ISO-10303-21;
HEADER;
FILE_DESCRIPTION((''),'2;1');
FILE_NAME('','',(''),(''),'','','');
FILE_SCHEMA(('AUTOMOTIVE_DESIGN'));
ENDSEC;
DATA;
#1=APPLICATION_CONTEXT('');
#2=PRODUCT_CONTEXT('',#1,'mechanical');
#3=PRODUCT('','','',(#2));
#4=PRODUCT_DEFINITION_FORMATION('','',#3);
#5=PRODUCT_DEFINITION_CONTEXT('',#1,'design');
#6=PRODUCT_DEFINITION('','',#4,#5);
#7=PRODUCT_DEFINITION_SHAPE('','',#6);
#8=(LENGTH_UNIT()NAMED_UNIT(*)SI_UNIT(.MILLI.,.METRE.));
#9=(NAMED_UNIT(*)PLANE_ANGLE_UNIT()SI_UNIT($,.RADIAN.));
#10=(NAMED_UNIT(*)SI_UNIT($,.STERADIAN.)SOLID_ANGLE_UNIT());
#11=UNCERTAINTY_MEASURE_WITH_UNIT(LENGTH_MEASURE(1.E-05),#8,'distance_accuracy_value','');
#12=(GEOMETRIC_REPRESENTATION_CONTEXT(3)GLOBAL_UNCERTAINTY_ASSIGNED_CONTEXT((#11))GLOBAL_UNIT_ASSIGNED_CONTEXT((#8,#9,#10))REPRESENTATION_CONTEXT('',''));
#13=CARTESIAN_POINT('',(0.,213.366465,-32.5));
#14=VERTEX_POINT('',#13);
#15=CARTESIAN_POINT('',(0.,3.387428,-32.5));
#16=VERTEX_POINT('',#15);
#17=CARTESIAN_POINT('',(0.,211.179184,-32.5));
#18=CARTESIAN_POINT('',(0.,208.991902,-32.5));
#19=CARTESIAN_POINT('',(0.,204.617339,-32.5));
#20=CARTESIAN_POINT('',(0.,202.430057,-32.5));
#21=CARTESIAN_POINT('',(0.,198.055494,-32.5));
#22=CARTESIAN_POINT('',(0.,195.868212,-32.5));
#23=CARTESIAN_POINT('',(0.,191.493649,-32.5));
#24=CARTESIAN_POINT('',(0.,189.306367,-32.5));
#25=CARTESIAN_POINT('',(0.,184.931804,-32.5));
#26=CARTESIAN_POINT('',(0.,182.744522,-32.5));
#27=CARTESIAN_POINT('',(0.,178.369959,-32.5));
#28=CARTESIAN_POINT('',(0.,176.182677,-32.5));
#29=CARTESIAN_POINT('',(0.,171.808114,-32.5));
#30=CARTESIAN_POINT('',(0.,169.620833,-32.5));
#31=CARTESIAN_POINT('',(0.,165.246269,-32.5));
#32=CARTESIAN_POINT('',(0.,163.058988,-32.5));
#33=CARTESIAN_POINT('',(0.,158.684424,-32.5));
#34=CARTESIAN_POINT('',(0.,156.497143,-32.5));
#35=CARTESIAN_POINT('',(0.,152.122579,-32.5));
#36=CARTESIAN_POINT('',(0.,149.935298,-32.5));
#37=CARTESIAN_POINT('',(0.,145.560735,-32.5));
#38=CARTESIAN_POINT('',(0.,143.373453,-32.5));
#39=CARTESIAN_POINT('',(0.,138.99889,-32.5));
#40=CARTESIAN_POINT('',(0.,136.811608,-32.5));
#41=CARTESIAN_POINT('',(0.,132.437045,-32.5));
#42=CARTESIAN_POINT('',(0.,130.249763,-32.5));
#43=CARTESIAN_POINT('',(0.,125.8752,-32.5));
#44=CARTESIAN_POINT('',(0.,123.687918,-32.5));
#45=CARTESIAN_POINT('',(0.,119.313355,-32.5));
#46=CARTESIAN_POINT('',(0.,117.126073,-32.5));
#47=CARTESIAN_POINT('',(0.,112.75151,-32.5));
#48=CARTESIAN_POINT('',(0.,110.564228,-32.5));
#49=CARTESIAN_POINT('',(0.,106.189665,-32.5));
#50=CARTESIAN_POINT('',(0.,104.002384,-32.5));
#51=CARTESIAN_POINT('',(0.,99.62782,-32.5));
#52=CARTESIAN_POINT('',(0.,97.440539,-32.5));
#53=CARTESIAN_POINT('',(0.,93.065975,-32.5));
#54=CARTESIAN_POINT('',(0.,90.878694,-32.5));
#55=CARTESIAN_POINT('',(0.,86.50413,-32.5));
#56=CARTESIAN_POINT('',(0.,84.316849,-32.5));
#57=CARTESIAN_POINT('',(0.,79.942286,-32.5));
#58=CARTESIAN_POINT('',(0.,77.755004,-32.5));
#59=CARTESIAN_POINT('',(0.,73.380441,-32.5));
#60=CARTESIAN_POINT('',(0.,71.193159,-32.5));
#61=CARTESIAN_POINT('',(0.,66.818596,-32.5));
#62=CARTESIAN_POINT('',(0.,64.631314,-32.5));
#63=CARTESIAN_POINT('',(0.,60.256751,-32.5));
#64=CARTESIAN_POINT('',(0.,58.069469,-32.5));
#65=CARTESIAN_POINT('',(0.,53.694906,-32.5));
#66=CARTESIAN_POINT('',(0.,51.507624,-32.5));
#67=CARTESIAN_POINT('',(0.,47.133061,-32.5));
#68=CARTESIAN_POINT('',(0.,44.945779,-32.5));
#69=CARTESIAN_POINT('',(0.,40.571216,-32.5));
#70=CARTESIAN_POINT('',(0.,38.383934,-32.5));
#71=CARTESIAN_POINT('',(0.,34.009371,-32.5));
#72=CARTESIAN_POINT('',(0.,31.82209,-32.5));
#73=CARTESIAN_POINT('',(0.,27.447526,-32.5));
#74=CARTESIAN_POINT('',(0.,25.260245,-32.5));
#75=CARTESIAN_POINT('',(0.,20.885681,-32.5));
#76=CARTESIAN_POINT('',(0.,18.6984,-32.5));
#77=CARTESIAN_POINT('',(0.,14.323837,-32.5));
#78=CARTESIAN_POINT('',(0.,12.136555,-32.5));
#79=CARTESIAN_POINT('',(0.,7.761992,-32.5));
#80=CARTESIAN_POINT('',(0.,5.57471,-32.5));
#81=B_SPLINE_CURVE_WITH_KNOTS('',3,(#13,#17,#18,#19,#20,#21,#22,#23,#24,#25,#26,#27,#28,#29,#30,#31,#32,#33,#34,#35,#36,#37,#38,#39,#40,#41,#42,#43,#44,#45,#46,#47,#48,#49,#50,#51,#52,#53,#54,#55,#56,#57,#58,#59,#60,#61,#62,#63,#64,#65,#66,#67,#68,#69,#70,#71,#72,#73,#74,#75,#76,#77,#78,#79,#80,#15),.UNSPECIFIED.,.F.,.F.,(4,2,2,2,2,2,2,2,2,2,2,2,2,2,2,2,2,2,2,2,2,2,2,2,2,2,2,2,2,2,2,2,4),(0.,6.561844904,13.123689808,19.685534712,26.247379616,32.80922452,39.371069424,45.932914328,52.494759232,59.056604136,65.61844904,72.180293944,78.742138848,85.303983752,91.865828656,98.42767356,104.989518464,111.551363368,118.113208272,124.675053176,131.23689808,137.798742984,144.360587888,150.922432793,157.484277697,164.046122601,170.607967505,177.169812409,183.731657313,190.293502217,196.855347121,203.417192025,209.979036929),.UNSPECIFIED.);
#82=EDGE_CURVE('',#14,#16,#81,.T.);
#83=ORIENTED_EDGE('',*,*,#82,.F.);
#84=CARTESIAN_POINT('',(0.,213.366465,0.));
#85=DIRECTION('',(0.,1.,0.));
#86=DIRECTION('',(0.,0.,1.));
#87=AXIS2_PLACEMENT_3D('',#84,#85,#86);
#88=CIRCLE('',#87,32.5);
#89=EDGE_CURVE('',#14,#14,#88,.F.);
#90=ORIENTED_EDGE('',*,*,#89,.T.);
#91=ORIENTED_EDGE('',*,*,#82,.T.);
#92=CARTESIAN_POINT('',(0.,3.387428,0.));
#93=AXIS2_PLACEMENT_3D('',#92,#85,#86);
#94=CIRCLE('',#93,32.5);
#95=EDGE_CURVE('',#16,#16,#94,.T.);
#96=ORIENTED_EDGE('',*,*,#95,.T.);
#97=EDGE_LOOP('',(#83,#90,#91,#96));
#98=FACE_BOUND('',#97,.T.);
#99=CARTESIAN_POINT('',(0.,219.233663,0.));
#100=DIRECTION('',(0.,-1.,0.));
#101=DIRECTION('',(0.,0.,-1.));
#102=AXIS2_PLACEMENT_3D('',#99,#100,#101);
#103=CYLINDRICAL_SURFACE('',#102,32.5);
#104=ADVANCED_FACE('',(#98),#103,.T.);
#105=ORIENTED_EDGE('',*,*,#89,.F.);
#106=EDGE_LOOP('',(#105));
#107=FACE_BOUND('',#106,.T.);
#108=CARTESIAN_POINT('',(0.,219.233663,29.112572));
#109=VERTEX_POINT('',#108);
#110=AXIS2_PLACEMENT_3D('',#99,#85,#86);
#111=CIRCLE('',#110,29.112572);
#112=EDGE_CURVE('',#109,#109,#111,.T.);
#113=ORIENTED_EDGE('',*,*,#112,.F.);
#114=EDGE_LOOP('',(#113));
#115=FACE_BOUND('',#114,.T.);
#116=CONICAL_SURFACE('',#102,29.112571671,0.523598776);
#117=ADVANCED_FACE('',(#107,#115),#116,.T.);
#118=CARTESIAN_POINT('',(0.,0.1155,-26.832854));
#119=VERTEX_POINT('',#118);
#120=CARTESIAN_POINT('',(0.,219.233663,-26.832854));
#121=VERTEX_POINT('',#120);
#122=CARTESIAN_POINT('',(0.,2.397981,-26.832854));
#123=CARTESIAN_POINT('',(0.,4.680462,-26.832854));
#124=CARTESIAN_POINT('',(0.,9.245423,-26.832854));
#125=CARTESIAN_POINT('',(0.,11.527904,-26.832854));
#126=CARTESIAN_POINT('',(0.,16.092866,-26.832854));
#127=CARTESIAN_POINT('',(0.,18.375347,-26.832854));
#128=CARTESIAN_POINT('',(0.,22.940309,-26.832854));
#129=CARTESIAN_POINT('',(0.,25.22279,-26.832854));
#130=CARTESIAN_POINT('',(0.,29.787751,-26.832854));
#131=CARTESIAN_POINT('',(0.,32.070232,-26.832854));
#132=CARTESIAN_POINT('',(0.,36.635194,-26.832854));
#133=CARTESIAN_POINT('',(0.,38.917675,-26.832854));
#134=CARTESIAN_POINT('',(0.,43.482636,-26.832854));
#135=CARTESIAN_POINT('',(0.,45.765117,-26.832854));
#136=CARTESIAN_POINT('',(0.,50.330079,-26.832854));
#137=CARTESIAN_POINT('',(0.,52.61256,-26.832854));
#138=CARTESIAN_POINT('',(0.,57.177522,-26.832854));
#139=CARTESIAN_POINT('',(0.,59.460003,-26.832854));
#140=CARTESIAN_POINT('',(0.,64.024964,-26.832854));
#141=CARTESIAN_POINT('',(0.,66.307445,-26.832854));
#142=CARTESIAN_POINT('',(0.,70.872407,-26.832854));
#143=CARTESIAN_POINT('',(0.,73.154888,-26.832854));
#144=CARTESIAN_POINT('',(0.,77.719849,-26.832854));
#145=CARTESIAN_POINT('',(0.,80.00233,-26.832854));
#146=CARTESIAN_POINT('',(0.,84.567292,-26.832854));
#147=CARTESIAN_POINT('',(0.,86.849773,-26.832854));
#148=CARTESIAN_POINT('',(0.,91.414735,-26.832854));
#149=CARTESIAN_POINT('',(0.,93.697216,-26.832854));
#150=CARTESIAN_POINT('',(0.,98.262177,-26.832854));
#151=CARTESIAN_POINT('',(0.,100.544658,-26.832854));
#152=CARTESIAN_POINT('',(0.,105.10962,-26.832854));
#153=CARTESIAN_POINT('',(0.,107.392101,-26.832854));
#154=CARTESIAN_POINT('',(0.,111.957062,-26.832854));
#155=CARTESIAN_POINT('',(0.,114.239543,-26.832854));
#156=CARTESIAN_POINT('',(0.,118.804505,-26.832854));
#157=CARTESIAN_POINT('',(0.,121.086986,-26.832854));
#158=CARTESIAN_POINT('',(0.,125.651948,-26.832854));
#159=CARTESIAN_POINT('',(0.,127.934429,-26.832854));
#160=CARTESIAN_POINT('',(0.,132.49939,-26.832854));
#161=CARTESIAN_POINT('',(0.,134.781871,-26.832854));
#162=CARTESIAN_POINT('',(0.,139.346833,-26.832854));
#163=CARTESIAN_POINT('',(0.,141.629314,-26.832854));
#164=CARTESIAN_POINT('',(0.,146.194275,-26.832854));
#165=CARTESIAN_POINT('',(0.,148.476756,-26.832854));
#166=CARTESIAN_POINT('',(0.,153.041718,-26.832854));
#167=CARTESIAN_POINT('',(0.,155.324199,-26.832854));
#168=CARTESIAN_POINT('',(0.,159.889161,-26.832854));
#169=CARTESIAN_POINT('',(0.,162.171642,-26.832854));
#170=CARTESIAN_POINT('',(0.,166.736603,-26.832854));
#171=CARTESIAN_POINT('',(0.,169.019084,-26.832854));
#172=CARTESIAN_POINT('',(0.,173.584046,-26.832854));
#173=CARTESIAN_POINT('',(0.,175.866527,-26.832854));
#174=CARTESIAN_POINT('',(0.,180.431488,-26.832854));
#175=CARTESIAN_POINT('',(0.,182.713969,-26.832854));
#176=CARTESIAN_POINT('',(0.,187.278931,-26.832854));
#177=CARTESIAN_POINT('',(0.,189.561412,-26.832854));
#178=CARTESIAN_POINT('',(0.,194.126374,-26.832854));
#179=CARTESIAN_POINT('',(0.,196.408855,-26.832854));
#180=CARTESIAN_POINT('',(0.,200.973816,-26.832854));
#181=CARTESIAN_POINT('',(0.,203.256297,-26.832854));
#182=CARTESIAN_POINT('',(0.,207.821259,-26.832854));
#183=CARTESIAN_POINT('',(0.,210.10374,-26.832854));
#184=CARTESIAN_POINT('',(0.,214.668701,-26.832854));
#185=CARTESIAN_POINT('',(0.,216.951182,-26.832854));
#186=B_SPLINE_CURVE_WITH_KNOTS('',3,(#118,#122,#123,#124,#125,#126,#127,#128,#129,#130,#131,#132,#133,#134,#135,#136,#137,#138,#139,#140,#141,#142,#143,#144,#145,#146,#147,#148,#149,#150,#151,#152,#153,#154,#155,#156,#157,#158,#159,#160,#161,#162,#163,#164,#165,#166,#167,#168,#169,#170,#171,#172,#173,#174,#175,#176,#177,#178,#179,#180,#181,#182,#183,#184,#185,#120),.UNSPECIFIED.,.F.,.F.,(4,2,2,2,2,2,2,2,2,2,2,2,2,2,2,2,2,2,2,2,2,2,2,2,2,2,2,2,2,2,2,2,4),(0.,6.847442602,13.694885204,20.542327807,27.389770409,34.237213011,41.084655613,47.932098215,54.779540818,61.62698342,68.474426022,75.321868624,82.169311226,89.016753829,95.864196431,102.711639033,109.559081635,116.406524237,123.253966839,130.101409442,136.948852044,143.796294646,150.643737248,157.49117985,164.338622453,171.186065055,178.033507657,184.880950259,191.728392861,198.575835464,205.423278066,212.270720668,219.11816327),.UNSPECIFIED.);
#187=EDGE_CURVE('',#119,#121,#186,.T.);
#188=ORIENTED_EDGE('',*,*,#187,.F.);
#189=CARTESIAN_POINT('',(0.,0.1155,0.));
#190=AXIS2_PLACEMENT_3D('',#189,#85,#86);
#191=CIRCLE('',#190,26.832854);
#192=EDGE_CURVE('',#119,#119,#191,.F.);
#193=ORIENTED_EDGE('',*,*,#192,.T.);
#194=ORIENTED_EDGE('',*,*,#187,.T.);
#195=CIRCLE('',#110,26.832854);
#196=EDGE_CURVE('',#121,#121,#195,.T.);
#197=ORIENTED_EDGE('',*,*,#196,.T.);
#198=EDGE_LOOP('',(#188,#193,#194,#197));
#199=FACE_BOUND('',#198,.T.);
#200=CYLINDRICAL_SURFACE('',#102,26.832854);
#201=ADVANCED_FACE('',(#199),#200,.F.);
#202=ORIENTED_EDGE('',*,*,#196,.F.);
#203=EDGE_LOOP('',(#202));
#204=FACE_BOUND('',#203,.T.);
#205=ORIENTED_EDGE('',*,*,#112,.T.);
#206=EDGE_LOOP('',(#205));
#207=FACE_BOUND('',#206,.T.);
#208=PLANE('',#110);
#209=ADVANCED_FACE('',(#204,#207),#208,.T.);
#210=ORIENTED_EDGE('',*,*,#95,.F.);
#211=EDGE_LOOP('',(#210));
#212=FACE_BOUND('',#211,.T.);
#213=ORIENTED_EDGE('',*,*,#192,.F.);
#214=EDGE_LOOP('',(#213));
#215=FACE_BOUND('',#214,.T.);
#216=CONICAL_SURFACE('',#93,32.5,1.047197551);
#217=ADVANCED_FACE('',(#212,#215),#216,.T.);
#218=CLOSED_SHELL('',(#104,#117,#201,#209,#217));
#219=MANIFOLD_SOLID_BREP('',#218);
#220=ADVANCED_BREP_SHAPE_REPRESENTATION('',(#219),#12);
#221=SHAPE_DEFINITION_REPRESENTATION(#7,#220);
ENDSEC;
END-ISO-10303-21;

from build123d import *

# Parameters (mm, degrees)
SKETCH1_R           = 32.5
BOSS_EXTRUDE1_DEPTH = 219.233663
SKETCH2_R           = 26.832853827
CUT_EXTRUDE1_DEPTH  = 224.999774536
CHAMFER1_SIZE       = 5.867198
CHAMFER1_SIZE_2     = 3.387428


with BuildPart() as part:
    # Sketch1 → Boss-Extrude1 (new body)
    with BuildSketch(Plane(origin=(0, 0, 0), x_dir=(1, 0, 0), z_dir=(0, 1, 0))):
        with Locations(Location((0, 0, 0), (0, 0, 90))):
            Circle(SKETCH1_R)
    extrude(amount=BOSS_EXTRUDE1_DEPTH)

    # Sketch2 → Cut-Extrude1 (cut, through all)
    with BuildSketch(Plane(origin=(0, 0, 0), x_dir=(1, 0, 0), z_dir=(0, 1, 0))):
        with Locations(Location((0, 0, 0), (0, 0, 90))):
            Circle(SKETCH2_R)
    extrude(amount=CUT_EXTRUDE1_DEPTH, mode=Mode.SUBTRACT)

    # Chamfer1
    # the kernel refuses this chamfer: 5.867198, 3.387428 mm, written as the material it takes off along each edge
    with BuildSketch(Plane(origin=(0, 219.233663, 0), x_dir=(0, 0, -1), z_dir=(1, 0, 0))) as chamfer1_piece_1:
        Polygon((32.5, -CHAMFER1_SIZE), (32.5 - CHAMFER1_SIZE_2, 0), (32.5, 0), align=None)
    revolve(axis=Axis((0, 219.233663, 0), (0, 1, 0)), mode=Mode.SUBTRACT)
    with BuildSketch(Plane(origin=(0, 0, 0), x_dir=(0, 0, -1), z_dir=(1, 0, 0))) as chamfer1_piece_2:
        Polygon((32.5, CHAMFER1_SIZE_2), (32.5 - CHAMFER1_SIZE, 0), (32.5, 0), align=None)
    revolve(axis=Axis((0, 0, 0), (0, 1, 0)), mode=Mode.SUBTRACT)


solid = part.part
